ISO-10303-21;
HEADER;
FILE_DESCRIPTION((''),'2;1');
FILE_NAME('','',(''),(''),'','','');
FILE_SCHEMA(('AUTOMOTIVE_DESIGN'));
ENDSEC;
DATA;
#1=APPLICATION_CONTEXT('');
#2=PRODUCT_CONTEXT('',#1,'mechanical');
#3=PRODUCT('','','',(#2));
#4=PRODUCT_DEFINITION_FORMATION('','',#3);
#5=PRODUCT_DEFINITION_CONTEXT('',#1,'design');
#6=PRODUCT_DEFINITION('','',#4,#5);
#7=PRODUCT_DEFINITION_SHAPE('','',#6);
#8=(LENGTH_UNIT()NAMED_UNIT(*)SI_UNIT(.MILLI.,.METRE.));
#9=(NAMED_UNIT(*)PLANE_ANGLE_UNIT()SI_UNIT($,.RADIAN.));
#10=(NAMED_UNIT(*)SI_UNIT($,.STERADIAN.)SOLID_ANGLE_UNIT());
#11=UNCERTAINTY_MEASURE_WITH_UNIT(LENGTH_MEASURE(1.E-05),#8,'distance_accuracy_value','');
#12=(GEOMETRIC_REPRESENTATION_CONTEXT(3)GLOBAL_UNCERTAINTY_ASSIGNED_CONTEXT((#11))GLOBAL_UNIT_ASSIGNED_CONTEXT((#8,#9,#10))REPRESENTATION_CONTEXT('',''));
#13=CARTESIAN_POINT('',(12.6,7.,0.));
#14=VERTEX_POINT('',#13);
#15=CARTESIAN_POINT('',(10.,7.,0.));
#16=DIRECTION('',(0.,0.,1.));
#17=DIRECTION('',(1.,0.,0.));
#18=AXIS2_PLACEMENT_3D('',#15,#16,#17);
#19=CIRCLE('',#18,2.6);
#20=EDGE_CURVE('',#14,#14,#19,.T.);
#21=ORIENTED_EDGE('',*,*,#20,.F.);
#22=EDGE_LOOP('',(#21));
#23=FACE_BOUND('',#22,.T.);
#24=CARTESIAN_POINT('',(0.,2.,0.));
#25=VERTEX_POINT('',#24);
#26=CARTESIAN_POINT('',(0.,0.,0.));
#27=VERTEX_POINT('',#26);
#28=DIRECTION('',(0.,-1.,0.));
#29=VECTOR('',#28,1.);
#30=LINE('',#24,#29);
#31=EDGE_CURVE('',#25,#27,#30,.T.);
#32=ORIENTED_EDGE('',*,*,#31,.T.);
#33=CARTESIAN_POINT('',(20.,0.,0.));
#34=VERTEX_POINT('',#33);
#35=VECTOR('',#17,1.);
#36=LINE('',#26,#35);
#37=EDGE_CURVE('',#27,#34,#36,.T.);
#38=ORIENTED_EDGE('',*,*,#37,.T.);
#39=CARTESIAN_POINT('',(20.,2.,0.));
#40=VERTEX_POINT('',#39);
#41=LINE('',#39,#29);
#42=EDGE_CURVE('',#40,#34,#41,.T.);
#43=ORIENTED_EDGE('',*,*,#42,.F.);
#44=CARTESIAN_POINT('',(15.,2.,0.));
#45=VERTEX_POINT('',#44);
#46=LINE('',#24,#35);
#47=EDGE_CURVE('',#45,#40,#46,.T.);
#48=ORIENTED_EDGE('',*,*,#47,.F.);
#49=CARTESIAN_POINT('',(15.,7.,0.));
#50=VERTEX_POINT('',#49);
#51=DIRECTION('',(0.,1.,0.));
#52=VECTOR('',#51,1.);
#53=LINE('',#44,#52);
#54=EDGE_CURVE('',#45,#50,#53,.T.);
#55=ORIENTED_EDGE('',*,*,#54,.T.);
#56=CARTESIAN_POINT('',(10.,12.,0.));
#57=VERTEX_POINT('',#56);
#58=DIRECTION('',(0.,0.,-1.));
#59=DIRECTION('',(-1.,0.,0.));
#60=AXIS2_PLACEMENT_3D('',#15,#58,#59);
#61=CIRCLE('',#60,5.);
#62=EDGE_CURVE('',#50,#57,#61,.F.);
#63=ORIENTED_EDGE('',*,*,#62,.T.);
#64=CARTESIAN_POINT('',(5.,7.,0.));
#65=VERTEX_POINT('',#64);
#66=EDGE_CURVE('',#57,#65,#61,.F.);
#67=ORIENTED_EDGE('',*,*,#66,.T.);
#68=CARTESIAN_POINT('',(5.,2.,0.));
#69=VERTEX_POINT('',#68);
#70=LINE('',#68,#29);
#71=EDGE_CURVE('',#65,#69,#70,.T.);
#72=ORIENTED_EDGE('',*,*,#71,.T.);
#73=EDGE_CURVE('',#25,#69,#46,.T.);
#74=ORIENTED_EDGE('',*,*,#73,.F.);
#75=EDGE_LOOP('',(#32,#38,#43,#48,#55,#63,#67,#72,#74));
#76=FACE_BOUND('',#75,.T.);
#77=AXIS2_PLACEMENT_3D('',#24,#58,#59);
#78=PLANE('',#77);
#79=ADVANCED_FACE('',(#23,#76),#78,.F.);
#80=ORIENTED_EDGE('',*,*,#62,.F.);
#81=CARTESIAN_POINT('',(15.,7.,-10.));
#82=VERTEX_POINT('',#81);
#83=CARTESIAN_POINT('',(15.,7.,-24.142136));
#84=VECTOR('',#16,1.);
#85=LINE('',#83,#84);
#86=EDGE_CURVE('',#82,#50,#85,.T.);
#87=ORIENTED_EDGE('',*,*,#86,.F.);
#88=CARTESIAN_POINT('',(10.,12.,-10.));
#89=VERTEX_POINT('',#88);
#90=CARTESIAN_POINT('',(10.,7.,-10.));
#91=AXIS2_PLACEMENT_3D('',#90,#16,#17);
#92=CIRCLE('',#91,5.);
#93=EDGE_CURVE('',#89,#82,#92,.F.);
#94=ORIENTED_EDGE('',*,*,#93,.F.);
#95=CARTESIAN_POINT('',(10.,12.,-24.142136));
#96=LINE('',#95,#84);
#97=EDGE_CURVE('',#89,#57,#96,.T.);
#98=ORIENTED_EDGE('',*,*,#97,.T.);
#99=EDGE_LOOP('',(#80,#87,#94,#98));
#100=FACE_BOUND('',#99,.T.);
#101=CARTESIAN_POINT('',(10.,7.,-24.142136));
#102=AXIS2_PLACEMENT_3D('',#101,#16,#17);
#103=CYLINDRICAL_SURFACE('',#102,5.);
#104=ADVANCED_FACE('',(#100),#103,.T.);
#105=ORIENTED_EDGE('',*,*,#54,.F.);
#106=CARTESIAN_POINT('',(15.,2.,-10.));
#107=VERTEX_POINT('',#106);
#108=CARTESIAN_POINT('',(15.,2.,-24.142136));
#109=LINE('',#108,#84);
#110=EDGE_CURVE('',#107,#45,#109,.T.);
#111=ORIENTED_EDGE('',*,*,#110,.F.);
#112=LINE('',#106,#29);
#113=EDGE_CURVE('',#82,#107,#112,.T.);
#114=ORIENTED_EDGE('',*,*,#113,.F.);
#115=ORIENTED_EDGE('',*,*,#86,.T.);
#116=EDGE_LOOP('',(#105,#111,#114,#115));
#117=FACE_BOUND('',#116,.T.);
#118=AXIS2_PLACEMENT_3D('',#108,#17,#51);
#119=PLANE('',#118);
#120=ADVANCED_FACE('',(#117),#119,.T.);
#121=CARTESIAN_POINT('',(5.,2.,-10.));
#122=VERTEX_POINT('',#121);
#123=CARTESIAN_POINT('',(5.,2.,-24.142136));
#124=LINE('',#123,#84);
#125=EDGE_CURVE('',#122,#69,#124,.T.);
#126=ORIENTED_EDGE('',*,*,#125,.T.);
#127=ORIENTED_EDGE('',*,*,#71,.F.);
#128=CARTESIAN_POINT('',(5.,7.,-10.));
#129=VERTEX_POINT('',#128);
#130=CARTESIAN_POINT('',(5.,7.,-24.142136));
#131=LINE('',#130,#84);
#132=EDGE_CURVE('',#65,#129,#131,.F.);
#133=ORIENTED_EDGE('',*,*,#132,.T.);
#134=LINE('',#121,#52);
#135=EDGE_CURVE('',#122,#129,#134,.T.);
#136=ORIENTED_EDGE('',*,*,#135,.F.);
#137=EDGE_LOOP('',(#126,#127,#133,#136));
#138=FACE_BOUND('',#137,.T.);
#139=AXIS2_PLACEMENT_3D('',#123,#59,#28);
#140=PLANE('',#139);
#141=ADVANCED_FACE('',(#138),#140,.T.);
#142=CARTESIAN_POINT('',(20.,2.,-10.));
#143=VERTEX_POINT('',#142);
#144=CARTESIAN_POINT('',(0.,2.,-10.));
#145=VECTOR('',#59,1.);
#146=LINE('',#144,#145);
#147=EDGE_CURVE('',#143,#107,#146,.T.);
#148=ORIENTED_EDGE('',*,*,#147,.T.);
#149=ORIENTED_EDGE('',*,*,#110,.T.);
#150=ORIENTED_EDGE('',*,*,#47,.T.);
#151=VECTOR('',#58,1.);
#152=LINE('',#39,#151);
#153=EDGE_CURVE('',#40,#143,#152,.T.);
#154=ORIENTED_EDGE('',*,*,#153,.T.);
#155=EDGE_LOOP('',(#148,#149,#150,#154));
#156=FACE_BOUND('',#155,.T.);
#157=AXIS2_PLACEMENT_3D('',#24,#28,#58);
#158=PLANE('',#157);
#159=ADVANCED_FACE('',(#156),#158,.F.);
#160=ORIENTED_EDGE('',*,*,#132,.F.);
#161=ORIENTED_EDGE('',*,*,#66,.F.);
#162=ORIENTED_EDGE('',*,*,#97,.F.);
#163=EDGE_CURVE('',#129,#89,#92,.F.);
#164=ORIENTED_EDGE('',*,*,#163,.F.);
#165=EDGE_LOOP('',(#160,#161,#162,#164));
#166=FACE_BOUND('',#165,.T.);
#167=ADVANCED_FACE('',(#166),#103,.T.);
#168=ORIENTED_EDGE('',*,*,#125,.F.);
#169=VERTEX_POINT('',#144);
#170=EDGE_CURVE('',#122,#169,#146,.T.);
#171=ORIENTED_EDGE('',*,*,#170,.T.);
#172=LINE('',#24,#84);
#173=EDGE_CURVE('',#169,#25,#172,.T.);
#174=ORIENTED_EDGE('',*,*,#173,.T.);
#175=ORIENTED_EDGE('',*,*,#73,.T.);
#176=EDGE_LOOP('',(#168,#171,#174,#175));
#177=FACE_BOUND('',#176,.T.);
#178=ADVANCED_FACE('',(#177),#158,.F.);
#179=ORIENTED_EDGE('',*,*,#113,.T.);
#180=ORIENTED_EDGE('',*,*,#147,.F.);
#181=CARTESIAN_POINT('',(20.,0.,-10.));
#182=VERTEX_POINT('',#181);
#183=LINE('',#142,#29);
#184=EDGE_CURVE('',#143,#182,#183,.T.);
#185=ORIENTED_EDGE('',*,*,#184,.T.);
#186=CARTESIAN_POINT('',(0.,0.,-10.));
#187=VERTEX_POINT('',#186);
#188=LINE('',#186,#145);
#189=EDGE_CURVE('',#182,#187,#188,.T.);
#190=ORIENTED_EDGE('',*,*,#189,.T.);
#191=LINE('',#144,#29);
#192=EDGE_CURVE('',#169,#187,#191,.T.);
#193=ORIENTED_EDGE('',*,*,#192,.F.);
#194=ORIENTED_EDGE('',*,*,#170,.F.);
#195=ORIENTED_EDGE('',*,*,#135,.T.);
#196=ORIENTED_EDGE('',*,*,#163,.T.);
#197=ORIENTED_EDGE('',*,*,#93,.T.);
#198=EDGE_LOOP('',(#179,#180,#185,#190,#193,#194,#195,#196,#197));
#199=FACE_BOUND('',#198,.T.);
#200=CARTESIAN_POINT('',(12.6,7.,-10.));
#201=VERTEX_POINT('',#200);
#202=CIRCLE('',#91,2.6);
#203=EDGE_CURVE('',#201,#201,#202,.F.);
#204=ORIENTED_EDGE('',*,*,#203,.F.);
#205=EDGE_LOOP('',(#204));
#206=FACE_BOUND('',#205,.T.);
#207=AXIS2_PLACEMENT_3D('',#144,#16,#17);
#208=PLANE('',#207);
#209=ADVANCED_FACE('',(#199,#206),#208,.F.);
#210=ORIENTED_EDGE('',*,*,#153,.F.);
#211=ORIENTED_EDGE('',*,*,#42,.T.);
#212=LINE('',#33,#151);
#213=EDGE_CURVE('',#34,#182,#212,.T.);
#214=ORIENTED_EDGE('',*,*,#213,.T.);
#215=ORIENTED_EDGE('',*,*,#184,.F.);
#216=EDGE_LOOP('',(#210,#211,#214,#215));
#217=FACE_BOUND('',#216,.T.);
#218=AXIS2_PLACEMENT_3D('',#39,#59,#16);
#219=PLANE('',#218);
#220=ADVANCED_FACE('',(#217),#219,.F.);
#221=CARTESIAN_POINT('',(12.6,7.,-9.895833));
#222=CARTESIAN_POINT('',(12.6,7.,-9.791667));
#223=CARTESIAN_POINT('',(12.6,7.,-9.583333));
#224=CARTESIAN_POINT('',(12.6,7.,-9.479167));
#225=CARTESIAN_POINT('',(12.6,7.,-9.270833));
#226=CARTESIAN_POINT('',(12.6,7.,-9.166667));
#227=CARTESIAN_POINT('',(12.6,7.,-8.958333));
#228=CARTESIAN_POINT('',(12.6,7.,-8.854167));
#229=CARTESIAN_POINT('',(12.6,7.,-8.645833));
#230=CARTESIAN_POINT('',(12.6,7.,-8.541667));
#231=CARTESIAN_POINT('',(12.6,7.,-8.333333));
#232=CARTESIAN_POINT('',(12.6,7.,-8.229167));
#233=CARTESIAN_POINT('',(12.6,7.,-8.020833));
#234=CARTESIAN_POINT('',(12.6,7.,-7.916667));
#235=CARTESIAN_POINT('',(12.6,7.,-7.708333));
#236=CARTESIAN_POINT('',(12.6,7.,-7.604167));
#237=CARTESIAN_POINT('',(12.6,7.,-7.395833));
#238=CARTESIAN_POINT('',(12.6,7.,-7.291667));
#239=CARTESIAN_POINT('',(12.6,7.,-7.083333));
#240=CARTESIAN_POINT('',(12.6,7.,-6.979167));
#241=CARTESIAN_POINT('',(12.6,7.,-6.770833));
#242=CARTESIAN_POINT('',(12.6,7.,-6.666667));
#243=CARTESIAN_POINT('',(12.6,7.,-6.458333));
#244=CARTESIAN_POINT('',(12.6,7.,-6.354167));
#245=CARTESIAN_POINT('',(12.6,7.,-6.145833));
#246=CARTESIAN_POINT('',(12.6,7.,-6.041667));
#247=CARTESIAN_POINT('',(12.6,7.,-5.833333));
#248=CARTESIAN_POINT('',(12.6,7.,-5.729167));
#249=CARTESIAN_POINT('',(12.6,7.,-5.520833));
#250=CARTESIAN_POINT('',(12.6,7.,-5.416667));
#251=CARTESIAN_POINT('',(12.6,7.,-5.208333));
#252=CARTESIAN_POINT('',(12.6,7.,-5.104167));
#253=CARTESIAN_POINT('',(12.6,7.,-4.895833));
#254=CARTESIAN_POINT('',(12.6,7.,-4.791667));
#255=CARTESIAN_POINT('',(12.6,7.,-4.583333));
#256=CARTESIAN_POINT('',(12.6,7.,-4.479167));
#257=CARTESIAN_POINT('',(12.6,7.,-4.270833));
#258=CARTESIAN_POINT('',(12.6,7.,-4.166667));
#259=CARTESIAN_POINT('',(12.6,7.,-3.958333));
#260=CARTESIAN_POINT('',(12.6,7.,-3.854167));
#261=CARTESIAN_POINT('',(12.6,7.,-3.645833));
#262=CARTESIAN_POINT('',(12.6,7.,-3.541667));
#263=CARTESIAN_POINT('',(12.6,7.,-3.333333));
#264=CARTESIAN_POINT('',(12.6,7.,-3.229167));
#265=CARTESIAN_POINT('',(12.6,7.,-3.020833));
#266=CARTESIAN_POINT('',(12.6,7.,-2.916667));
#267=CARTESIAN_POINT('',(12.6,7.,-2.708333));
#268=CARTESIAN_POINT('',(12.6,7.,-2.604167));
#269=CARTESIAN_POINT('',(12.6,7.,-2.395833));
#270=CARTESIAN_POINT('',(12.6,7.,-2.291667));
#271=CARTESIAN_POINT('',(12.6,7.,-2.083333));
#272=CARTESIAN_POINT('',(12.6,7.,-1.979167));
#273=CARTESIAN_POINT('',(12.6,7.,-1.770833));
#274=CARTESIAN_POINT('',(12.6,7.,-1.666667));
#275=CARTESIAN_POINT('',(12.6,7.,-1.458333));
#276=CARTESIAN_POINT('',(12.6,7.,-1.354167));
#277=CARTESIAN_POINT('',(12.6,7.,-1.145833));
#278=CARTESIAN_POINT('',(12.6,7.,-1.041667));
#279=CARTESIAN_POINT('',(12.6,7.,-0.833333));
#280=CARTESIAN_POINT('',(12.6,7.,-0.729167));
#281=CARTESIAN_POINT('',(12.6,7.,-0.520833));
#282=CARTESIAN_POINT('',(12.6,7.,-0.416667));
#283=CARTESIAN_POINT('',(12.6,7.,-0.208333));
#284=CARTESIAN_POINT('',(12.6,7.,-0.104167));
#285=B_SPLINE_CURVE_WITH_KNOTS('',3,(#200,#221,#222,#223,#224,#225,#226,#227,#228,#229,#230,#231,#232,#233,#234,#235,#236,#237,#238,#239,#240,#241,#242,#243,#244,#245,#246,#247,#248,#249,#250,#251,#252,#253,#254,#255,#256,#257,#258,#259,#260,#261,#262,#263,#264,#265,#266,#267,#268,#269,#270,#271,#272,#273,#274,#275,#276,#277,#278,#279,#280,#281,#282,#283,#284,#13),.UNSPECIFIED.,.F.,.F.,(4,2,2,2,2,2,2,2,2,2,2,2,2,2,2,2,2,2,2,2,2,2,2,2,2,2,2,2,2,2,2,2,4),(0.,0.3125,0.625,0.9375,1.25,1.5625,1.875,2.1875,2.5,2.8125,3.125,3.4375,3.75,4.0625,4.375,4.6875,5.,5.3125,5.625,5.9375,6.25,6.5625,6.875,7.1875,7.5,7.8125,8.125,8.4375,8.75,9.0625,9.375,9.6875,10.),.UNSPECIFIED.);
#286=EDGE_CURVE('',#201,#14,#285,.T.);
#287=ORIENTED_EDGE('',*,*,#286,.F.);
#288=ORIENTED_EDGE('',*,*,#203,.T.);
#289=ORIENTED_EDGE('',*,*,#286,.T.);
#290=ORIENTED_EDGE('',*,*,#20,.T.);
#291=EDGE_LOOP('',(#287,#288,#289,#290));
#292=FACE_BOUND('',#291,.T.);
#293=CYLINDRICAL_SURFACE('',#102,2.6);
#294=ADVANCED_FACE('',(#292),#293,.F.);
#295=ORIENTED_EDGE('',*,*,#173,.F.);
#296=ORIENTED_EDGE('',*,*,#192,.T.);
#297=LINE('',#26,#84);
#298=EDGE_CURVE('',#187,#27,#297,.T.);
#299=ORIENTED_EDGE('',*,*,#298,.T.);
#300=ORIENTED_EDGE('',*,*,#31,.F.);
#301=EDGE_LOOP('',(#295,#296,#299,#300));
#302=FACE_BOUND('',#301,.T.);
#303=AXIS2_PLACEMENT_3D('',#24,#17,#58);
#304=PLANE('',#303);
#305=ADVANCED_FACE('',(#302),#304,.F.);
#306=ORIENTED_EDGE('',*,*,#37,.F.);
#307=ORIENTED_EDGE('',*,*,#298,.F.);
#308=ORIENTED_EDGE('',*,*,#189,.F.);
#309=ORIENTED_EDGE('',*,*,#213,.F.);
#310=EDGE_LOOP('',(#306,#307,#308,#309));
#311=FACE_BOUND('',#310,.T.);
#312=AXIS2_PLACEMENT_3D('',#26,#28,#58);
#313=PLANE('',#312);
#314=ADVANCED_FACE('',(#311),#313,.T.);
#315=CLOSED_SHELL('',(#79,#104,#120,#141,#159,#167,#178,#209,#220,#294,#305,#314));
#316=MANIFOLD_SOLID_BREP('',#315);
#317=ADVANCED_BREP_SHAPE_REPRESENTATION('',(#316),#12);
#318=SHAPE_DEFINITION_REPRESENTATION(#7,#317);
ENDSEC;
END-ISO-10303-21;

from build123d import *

# Parameters (mm, degrees)
CROQUIS1_W              = 20
CROQUIS1_H              = 10
SALIENTE_EXTRUIR1_DEPTH = 2
CROQUIS2_W              = 10
CROQUIS2_H              = 10
CROQUIS2_R              = 2.6
SALIENTE_EXTRUIR2_DEPTH = 10
REDONDEO1_R             = 5


with BuildPart() as part:
    # Croquis1 → Saliente-Extruir1 (new body)
    with BuildSketch(Plane(origin=(0, 0, 0), x_dir=(1, 0, 0), z_dir=(0, 1, 0))):
        with Locations((10, 5)):
            Rectangle(CROQUIS1_W, CROQUIS1_H)
    extrude(amount=SALIENTE_EXTRUIR1_DEPTH)

    # Croquis2 → Saliente-Extruir2 (add)
    with BuildSketch(Plane.XY):
        with Locations((10, 7)):
            Rectangle(CROQUIS2_W, CROQUIS2_H)
        with Locations((10, 7)):
            Circle(CROQUIS2_R, mode=Mode.SUBTRACT)
    extrude(amount=-SALIENTE_EXTRUIR2_DEPTH)

    # Redondeo1
    redondeo1_edges = [part.edges().sort_by_distance(p)[0] for p in [
        (15, 12, -5),
        (5, 12, -5),
    ]]
    fillet(redondeo1_edges, radius=REDONDEO1_R - 0.0001)  # a hair under: the kernel refuses the full size


solid = part.part
